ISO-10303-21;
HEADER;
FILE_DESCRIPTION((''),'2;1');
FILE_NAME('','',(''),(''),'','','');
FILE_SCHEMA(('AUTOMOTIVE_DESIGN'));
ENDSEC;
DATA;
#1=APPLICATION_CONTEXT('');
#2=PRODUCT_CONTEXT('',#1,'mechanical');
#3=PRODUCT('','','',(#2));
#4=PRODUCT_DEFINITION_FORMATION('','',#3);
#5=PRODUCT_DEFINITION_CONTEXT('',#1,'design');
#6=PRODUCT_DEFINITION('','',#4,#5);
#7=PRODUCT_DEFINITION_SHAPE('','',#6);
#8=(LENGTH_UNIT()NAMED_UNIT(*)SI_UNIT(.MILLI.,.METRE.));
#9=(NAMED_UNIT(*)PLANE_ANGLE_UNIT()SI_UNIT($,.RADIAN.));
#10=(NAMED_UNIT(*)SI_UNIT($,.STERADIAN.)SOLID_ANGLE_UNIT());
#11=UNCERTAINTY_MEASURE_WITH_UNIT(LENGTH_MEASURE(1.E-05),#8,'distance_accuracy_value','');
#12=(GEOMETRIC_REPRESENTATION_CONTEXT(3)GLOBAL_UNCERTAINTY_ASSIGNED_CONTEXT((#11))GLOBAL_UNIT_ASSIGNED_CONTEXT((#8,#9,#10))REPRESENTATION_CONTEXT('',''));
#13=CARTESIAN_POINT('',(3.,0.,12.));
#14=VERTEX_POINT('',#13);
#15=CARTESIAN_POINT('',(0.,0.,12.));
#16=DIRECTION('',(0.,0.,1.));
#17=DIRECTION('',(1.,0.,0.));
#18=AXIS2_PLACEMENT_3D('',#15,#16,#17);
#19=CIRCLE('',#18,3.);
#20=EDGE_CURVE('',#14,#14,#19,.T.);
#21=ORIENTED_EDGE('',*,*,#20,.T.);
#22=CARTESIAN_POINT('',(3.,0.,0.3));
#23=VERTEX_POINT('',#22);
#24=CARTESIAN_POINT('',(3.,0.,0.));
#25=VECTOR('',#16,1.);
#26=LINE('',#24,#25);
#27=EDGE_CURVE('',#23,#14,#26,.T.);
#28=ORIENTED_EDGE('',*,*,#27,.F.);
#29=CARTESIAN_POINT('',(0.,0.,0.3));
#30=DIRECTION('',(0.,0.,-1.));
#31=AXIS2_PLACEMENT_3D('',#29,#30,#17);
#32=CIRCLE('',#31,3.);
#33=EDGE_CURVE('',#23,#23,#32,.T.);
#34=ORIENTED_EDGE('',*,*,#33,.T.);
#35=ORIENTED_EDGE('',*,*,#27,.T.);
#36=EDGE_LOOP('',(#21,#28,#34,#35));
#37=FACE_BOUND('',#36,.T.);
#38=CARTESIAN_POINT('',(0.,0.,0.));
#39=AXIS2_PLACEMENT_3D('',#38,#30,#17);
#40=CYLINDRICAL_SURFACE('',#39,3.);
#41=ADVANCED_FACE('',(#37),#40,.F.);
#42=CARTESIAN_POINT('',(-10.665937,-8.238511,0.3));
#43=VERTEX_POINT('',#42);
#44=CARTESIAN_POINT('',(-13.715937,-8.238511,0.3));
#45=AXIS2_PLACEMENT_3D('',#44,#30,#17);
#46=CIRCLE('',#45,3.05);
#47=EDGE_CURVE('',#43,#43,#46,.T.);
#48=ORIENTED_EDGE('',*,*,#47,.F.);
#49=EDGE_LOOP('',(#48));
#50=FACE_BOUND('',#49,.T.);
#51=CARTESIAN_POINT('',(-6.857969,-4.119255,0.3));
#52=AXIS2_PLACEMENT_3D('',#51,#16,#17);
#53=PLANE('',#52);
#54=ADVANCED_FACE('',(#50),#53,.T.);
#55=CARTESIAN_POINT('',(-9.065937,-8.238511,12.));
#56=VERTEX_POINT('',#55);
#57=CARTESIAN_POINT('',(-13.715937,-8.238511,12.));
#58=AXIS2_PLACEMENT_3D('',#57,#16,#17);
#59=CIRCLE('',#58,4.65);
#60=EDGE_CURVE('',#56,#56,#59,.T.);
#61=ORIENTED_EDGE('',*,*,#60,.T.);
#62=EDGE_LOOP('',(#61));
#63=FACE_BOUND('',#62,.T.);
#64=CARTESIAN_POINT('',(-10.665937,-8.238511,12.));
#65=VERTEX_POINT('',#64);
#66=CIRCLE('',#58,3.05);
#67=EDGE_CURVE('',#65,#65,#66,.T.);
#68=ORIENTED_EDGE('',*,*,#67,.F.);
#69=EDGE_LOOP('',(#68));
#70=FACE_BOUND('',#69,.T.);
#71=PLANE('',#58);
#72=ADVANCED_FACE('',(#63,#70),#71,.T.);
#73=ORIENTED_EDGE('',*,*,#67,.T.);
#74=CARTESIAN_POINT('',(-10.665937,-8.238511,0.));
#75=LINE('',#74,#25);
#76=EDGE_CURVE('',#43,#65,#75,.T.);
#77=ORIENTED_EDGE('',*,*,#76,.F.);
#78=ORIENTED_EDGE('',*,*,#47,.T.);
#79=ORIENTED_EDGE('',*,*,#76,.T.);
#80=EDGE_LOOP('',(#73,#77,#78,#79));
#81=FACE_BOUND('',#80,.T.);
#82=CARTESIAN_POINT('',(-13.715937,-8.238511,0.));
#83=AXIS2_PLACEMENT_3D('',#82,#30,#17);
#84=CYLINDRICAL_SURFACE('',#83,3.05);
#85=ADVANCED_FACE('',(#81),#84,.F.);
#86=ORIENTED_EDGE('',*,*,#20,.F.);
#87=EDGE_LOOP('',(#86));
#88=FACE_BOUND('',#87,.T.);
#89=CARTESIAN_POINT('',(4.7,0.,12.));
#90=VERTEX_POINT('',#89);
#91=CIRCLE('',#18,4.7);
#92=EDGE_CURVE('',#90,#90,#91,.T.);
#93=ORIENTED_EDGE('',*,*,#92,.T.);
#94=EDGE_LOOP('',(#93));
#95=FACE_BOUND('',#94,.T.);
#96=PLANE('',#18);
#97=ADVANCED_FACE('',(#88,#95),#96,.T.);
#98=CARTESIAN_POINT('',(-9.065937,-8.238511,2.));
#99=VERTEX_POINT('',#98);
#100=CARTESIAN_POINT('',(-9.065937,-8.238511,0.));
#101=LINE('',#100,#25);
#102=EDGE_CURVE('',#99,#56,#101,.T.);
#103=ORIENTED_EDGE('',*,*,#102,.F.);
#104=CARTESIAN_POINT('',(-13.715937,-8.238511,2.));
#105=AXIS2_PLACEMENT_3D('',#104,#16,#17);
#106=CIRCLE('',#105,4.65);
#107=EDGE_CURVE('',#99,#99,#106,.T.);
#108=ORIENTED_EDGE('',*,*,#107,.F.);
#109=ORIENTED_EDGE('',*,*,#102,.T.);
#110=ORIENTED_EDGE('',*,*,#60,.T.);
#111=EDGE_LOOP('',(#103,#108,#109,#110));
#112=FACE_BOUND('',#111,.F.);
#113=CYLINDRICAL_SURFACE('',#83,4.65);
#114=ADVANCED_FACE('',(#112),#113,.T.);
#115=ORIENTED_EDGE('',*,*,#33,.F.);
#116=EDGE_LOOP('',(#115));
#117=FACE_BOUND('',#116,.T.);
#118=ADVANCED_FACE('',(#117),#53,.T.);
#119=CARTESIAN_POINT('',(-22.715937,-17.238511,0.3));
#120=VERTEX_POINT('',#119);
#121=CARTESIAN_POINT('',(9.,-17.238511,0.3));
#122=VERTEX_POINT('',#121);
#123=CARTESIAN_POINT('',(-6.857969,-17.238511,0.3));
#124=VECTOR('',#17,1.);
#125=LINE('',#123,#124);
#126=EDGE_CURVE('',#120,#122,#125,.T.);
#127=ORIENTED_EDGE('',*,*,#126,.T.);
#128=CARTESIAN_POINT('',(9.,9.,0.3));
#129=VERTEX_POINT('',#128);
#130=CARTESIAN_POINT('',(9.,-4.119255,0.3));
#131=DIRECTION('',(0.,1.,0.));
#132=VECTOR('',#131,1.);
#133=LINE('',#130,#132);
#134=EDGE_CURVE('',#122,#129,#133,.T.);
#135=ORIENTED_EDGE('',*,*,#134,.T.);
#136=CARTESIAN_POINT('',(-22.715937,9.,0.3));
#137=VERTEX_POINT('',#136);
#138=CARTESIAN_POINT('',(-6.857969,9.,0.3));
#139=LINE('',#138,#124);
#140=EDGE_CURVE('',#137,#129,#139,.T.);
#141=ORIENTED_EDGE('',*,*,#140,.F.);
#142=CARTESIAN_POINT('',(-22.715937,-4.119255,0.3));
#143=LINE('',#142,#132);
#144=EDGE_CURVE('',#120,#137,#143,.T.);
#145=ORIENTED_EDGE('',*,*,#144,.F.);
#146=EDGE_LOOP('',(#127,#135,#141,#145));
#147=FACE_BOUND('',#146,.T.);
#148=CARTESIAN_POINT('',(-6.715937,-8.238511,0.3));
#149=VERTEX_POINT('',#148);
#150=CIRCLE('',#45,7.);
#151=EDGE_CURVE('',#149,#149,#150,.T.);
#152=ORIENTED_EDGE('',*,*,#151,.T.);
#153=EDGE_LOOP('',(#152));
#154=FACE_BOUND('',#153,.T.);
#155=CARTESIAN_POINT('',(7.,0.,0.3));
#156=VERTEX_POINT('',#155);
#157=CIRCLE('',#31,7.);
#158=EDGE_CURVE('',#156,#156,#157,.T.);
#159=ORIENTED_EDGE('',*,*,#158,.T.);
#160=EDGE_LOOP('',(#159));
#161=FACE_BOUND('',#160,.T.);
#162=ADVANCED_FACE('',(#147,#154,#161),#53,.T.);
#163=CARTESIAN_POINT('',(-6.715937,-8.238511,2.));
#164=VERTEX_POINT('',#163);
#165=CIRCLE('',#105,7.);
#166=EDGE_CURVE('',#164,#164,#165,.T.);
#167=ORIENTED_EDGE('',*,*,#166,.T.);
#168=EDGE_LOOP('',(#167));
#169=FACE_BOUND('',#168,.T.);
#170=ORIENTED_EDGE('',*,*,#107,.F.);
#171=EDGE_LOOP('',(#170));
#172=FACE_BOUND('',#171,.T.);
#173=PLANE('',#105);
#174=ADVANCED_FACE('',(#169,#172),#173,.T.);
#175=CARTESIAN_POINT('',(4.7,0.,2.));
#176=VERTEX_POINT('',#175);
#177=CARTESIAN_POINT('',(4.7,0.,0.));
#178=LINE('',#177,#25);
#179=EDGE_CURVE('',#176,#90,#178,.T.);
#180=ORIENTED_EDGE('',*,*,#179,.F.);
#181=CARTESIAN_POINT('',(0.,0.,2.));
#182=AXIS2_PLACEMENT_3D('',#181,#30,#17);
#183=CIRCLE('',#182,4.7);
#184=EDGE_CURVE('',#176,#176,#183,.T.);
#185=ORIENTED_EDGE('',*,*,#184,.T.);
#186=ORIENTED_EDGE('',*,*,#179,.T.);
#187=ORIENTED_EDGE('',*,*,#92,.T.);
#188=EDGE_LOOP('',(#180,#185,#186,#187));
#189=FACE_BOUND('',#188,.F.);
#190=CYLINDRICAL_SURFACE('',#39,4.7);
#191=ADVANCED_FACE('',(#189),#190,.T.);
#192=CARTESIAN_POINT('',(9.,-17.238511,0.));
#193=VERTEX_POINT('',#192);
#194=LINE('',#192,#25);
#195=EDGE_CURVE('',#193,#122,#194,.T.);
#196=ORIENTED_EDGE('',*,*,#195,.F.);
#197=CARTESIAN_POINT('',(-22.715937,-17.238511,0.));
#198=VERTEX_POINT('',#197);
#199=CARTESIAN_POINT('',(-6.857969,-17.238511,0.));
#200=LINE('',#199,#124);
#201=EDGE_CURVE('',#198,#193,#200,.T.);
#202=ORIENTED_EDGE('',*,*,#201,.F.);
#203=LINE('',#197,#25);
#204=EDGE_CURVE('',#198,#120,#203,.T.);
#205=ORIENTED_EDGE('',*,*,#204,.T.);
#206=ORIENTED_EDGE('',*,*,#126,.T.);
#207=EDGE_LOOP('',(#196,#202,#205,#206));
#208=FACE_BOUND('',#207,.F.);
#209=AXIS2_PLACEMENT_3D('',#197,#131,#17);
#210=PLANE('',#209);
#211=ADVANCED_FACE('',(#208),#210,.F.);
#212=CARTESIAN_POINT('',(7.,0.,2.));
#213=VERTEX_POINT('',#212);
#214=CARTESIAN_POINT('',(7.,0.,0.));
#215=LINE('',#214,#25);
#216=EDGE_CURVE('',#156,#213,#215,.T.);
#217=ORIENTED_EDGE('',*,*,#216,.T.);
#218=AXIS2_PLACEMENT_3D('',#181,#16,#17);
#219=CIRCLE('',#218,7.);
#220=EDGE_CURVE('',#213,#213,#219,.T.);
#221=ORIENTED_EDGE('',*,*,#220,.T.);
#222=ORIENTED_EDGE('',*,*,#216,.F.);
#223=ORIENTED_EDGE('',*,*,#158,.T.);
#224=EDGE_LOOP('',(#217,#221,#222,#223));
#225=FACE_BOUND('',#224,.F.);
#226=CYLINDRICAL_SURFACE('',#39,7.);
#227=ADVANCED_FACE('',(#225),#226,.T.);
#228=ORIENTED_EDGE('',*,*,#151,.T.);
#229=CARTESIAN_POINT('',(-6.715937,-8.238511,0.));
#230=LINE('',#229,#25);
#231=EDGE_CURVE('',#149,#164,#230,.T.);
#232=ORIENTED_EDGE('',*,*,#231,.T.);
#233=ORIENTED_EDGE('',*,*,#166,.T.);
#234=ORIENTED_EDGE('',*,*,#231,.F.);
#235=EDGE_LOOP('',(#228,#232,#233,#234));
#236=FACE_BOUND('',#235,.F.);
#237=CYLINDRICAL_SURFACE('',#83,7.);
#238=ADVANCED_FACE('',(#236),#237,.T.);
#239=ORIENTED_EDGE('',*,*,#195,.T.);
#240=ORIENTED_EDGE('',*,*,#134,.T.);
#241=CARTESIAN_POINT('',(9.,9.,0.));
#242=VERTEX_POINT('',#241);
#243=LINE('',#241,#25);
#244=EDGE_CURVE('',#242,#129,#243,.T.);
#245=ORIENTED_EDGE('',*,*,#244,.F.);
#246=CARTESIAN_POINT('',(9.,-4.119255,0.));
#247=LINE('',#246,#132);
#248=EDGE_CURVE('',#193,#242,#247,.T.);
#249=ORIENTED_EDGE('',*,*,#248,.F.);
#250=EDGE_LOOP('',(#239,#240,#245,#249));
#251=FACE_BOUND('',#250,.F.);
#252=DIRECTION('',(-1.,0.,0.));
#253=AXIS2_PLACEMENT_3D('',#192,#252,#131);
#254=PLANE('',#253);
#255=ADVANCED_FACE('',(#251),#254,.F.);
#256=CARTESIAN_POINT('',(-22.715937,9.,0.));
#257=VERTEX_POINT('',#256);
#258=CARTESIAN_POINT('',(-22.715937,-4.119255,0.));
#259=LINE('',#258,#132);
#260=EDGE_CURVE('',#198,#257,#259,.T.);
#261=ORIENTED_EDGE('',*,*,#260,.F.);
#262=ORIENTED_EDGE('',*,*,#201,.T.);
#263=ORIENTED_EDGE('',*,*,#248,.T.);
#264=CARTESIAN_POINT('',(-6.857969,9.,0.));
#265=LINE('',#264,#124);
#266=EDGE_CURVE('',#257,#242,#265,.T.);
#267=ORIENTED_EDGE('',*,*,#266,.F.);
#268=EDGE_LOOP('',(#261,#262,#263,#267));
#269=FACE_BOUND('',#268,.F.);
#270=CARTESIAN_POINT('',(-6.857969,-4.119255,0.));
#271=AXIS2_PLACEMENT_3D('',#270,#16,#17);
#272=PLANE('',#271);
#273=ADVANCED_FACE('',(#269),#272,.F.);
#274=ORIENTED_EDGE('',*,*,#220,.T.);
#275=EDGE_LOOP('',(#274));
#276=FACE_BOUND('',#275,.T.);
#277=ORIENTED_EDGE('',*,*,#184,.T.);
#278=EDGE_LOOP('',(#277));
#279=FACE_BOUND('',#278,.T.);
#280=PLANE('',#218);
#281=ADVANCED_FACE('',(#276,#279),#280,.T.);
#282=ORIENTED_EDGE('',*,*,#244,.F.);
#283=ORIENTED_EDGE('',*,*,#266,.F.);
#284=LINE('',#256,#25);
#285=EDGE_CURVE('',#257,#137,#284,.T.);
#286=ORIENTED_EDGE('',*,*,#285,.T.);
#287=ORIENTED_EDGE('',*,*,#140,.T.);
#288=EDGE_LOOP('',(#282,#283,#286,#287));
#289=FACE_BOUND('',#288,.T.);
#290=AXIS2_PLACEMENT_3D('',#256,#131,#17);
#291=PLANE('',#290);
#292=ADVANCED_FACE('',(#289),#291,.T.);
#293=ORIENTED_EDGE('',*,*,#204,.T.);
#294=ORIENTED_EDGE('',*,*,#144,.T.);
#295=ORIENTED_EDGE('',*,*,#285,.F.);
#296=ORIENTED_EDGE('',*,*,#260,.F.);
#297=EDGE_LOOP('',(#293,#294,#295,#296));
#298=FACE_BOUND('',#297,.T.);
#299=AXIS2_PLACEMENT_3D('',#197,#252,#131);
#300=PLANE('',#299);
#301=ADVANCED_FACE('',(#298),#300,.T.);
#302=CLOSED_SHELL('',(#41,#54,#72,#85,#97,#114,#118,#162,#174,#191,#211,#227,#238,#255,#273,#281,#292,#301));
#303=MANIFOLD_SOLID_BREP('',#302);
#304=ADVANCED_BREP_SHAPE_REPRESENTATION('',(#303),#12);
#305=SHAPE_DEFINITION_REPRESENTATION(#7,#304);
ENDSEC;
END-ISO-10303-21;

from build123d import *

# Parameters (mm, degrees)
F0_R     = 7
F0_R_2   = 4.7
F0_R_3   = 3
F1_DEPTH = 2
F2_DEPTH = 12
F0_R_4   = 4.65
F3_DEPTH = 2
F0_R_5   = 3.05
F4_DEPTH = 12
F0_W     = 31.71593739
F0_H     = 26.2385108796
F5_DEPTH = 0.3


with BuildPart() as f1:
    # F0 (on Top) → F1 (new body)
    with BuildSketch(Plane.XY):
        Circle(F0_R)
        Circle(F0_R_2, mode=Mode.SUBTRACT)
        Circle(F0_R_2)
        Circle(F0_R_3, mode=Mode.SUBTRACT)
    extrude(amount=F1_DEPTH)

    # F0 (on Top) → F2 (join)
    with BuildSketch(Plane.XY):
        Circle(F0_R_2)
        Circle(F0_R_3, mode=Mode.SUBTRACT)
    extrude(amount=F2_DEPTH)



with BuildPart() as f3:
    # F0 (on Top) → F3 (new body)
    with BuildSketch(Plane.XY):
        with Locations((-13.71593739, -8.2385108796)):
            Circle(F0_R)
        with Locations((-13.71593739, -8.2385108796)):
            Circle(F0_R_4, mode=Mode.SUBTRACT)
    extrude(amount=F3_DEPTH)

    # F0 (on Top) → F4 (join)
    with BuildSketch(Plane.XY):
        with Locations((-13.71593739, -8.2385108796)):
            Circle(F0_R_4)
        with Locations((-13.71593739, -8.2385108796)):
            Circle(F0_R_5, mode=Mode.SUBTRACT)
    extrude(amount=F4_DEPTH)


with BuildPart() as f1_1:
    add(f1.part)

    add(f3.part)  # F5 merges F3
    # F0 (on Top) → F5 (join)
    with BuildSketch(Plane.XY):
        with Locations((-6.857968695, -4.1192554398)):
            Rectangle(F0_W, F0_H)
        with Locations((-13.71593739, -8.2385108796)):
            Circle(F0_R, mode=Mode.SUBTRACT)
        Circle(F0_R, mode=Mode.SUBTRACT)
        with Locations((-13.71593739, -8.2385108796)):
            Circle(F0_R)
        with Locations((-13.71593739, -8.2385108796)):
            Circle(F0_R_4, mode=Mode.SUBTRACT)
        Circle(F0_R)
        Circle(F0_R_2, mode=Mode.SUBTRACT)
        Circle(F0_R_2)
        Circle(F0_R_3, mode=Mode.SUBTRACT)
        with Locations((-13.71593739, -8.2385108796)):
            Circle(F0_R_4)
        with Locations((-13.71593739, -8.2385108796)):
            Circle(F0_R_5, mode=Mode.SUBTRACT)
        with Locations((-13.71593739, -8.2385108796)):
            Circle(F0_R_5)
        Circle(F0_R_3)
    extrude(amount=F5_DEPTH)


solid = f1_1.part
